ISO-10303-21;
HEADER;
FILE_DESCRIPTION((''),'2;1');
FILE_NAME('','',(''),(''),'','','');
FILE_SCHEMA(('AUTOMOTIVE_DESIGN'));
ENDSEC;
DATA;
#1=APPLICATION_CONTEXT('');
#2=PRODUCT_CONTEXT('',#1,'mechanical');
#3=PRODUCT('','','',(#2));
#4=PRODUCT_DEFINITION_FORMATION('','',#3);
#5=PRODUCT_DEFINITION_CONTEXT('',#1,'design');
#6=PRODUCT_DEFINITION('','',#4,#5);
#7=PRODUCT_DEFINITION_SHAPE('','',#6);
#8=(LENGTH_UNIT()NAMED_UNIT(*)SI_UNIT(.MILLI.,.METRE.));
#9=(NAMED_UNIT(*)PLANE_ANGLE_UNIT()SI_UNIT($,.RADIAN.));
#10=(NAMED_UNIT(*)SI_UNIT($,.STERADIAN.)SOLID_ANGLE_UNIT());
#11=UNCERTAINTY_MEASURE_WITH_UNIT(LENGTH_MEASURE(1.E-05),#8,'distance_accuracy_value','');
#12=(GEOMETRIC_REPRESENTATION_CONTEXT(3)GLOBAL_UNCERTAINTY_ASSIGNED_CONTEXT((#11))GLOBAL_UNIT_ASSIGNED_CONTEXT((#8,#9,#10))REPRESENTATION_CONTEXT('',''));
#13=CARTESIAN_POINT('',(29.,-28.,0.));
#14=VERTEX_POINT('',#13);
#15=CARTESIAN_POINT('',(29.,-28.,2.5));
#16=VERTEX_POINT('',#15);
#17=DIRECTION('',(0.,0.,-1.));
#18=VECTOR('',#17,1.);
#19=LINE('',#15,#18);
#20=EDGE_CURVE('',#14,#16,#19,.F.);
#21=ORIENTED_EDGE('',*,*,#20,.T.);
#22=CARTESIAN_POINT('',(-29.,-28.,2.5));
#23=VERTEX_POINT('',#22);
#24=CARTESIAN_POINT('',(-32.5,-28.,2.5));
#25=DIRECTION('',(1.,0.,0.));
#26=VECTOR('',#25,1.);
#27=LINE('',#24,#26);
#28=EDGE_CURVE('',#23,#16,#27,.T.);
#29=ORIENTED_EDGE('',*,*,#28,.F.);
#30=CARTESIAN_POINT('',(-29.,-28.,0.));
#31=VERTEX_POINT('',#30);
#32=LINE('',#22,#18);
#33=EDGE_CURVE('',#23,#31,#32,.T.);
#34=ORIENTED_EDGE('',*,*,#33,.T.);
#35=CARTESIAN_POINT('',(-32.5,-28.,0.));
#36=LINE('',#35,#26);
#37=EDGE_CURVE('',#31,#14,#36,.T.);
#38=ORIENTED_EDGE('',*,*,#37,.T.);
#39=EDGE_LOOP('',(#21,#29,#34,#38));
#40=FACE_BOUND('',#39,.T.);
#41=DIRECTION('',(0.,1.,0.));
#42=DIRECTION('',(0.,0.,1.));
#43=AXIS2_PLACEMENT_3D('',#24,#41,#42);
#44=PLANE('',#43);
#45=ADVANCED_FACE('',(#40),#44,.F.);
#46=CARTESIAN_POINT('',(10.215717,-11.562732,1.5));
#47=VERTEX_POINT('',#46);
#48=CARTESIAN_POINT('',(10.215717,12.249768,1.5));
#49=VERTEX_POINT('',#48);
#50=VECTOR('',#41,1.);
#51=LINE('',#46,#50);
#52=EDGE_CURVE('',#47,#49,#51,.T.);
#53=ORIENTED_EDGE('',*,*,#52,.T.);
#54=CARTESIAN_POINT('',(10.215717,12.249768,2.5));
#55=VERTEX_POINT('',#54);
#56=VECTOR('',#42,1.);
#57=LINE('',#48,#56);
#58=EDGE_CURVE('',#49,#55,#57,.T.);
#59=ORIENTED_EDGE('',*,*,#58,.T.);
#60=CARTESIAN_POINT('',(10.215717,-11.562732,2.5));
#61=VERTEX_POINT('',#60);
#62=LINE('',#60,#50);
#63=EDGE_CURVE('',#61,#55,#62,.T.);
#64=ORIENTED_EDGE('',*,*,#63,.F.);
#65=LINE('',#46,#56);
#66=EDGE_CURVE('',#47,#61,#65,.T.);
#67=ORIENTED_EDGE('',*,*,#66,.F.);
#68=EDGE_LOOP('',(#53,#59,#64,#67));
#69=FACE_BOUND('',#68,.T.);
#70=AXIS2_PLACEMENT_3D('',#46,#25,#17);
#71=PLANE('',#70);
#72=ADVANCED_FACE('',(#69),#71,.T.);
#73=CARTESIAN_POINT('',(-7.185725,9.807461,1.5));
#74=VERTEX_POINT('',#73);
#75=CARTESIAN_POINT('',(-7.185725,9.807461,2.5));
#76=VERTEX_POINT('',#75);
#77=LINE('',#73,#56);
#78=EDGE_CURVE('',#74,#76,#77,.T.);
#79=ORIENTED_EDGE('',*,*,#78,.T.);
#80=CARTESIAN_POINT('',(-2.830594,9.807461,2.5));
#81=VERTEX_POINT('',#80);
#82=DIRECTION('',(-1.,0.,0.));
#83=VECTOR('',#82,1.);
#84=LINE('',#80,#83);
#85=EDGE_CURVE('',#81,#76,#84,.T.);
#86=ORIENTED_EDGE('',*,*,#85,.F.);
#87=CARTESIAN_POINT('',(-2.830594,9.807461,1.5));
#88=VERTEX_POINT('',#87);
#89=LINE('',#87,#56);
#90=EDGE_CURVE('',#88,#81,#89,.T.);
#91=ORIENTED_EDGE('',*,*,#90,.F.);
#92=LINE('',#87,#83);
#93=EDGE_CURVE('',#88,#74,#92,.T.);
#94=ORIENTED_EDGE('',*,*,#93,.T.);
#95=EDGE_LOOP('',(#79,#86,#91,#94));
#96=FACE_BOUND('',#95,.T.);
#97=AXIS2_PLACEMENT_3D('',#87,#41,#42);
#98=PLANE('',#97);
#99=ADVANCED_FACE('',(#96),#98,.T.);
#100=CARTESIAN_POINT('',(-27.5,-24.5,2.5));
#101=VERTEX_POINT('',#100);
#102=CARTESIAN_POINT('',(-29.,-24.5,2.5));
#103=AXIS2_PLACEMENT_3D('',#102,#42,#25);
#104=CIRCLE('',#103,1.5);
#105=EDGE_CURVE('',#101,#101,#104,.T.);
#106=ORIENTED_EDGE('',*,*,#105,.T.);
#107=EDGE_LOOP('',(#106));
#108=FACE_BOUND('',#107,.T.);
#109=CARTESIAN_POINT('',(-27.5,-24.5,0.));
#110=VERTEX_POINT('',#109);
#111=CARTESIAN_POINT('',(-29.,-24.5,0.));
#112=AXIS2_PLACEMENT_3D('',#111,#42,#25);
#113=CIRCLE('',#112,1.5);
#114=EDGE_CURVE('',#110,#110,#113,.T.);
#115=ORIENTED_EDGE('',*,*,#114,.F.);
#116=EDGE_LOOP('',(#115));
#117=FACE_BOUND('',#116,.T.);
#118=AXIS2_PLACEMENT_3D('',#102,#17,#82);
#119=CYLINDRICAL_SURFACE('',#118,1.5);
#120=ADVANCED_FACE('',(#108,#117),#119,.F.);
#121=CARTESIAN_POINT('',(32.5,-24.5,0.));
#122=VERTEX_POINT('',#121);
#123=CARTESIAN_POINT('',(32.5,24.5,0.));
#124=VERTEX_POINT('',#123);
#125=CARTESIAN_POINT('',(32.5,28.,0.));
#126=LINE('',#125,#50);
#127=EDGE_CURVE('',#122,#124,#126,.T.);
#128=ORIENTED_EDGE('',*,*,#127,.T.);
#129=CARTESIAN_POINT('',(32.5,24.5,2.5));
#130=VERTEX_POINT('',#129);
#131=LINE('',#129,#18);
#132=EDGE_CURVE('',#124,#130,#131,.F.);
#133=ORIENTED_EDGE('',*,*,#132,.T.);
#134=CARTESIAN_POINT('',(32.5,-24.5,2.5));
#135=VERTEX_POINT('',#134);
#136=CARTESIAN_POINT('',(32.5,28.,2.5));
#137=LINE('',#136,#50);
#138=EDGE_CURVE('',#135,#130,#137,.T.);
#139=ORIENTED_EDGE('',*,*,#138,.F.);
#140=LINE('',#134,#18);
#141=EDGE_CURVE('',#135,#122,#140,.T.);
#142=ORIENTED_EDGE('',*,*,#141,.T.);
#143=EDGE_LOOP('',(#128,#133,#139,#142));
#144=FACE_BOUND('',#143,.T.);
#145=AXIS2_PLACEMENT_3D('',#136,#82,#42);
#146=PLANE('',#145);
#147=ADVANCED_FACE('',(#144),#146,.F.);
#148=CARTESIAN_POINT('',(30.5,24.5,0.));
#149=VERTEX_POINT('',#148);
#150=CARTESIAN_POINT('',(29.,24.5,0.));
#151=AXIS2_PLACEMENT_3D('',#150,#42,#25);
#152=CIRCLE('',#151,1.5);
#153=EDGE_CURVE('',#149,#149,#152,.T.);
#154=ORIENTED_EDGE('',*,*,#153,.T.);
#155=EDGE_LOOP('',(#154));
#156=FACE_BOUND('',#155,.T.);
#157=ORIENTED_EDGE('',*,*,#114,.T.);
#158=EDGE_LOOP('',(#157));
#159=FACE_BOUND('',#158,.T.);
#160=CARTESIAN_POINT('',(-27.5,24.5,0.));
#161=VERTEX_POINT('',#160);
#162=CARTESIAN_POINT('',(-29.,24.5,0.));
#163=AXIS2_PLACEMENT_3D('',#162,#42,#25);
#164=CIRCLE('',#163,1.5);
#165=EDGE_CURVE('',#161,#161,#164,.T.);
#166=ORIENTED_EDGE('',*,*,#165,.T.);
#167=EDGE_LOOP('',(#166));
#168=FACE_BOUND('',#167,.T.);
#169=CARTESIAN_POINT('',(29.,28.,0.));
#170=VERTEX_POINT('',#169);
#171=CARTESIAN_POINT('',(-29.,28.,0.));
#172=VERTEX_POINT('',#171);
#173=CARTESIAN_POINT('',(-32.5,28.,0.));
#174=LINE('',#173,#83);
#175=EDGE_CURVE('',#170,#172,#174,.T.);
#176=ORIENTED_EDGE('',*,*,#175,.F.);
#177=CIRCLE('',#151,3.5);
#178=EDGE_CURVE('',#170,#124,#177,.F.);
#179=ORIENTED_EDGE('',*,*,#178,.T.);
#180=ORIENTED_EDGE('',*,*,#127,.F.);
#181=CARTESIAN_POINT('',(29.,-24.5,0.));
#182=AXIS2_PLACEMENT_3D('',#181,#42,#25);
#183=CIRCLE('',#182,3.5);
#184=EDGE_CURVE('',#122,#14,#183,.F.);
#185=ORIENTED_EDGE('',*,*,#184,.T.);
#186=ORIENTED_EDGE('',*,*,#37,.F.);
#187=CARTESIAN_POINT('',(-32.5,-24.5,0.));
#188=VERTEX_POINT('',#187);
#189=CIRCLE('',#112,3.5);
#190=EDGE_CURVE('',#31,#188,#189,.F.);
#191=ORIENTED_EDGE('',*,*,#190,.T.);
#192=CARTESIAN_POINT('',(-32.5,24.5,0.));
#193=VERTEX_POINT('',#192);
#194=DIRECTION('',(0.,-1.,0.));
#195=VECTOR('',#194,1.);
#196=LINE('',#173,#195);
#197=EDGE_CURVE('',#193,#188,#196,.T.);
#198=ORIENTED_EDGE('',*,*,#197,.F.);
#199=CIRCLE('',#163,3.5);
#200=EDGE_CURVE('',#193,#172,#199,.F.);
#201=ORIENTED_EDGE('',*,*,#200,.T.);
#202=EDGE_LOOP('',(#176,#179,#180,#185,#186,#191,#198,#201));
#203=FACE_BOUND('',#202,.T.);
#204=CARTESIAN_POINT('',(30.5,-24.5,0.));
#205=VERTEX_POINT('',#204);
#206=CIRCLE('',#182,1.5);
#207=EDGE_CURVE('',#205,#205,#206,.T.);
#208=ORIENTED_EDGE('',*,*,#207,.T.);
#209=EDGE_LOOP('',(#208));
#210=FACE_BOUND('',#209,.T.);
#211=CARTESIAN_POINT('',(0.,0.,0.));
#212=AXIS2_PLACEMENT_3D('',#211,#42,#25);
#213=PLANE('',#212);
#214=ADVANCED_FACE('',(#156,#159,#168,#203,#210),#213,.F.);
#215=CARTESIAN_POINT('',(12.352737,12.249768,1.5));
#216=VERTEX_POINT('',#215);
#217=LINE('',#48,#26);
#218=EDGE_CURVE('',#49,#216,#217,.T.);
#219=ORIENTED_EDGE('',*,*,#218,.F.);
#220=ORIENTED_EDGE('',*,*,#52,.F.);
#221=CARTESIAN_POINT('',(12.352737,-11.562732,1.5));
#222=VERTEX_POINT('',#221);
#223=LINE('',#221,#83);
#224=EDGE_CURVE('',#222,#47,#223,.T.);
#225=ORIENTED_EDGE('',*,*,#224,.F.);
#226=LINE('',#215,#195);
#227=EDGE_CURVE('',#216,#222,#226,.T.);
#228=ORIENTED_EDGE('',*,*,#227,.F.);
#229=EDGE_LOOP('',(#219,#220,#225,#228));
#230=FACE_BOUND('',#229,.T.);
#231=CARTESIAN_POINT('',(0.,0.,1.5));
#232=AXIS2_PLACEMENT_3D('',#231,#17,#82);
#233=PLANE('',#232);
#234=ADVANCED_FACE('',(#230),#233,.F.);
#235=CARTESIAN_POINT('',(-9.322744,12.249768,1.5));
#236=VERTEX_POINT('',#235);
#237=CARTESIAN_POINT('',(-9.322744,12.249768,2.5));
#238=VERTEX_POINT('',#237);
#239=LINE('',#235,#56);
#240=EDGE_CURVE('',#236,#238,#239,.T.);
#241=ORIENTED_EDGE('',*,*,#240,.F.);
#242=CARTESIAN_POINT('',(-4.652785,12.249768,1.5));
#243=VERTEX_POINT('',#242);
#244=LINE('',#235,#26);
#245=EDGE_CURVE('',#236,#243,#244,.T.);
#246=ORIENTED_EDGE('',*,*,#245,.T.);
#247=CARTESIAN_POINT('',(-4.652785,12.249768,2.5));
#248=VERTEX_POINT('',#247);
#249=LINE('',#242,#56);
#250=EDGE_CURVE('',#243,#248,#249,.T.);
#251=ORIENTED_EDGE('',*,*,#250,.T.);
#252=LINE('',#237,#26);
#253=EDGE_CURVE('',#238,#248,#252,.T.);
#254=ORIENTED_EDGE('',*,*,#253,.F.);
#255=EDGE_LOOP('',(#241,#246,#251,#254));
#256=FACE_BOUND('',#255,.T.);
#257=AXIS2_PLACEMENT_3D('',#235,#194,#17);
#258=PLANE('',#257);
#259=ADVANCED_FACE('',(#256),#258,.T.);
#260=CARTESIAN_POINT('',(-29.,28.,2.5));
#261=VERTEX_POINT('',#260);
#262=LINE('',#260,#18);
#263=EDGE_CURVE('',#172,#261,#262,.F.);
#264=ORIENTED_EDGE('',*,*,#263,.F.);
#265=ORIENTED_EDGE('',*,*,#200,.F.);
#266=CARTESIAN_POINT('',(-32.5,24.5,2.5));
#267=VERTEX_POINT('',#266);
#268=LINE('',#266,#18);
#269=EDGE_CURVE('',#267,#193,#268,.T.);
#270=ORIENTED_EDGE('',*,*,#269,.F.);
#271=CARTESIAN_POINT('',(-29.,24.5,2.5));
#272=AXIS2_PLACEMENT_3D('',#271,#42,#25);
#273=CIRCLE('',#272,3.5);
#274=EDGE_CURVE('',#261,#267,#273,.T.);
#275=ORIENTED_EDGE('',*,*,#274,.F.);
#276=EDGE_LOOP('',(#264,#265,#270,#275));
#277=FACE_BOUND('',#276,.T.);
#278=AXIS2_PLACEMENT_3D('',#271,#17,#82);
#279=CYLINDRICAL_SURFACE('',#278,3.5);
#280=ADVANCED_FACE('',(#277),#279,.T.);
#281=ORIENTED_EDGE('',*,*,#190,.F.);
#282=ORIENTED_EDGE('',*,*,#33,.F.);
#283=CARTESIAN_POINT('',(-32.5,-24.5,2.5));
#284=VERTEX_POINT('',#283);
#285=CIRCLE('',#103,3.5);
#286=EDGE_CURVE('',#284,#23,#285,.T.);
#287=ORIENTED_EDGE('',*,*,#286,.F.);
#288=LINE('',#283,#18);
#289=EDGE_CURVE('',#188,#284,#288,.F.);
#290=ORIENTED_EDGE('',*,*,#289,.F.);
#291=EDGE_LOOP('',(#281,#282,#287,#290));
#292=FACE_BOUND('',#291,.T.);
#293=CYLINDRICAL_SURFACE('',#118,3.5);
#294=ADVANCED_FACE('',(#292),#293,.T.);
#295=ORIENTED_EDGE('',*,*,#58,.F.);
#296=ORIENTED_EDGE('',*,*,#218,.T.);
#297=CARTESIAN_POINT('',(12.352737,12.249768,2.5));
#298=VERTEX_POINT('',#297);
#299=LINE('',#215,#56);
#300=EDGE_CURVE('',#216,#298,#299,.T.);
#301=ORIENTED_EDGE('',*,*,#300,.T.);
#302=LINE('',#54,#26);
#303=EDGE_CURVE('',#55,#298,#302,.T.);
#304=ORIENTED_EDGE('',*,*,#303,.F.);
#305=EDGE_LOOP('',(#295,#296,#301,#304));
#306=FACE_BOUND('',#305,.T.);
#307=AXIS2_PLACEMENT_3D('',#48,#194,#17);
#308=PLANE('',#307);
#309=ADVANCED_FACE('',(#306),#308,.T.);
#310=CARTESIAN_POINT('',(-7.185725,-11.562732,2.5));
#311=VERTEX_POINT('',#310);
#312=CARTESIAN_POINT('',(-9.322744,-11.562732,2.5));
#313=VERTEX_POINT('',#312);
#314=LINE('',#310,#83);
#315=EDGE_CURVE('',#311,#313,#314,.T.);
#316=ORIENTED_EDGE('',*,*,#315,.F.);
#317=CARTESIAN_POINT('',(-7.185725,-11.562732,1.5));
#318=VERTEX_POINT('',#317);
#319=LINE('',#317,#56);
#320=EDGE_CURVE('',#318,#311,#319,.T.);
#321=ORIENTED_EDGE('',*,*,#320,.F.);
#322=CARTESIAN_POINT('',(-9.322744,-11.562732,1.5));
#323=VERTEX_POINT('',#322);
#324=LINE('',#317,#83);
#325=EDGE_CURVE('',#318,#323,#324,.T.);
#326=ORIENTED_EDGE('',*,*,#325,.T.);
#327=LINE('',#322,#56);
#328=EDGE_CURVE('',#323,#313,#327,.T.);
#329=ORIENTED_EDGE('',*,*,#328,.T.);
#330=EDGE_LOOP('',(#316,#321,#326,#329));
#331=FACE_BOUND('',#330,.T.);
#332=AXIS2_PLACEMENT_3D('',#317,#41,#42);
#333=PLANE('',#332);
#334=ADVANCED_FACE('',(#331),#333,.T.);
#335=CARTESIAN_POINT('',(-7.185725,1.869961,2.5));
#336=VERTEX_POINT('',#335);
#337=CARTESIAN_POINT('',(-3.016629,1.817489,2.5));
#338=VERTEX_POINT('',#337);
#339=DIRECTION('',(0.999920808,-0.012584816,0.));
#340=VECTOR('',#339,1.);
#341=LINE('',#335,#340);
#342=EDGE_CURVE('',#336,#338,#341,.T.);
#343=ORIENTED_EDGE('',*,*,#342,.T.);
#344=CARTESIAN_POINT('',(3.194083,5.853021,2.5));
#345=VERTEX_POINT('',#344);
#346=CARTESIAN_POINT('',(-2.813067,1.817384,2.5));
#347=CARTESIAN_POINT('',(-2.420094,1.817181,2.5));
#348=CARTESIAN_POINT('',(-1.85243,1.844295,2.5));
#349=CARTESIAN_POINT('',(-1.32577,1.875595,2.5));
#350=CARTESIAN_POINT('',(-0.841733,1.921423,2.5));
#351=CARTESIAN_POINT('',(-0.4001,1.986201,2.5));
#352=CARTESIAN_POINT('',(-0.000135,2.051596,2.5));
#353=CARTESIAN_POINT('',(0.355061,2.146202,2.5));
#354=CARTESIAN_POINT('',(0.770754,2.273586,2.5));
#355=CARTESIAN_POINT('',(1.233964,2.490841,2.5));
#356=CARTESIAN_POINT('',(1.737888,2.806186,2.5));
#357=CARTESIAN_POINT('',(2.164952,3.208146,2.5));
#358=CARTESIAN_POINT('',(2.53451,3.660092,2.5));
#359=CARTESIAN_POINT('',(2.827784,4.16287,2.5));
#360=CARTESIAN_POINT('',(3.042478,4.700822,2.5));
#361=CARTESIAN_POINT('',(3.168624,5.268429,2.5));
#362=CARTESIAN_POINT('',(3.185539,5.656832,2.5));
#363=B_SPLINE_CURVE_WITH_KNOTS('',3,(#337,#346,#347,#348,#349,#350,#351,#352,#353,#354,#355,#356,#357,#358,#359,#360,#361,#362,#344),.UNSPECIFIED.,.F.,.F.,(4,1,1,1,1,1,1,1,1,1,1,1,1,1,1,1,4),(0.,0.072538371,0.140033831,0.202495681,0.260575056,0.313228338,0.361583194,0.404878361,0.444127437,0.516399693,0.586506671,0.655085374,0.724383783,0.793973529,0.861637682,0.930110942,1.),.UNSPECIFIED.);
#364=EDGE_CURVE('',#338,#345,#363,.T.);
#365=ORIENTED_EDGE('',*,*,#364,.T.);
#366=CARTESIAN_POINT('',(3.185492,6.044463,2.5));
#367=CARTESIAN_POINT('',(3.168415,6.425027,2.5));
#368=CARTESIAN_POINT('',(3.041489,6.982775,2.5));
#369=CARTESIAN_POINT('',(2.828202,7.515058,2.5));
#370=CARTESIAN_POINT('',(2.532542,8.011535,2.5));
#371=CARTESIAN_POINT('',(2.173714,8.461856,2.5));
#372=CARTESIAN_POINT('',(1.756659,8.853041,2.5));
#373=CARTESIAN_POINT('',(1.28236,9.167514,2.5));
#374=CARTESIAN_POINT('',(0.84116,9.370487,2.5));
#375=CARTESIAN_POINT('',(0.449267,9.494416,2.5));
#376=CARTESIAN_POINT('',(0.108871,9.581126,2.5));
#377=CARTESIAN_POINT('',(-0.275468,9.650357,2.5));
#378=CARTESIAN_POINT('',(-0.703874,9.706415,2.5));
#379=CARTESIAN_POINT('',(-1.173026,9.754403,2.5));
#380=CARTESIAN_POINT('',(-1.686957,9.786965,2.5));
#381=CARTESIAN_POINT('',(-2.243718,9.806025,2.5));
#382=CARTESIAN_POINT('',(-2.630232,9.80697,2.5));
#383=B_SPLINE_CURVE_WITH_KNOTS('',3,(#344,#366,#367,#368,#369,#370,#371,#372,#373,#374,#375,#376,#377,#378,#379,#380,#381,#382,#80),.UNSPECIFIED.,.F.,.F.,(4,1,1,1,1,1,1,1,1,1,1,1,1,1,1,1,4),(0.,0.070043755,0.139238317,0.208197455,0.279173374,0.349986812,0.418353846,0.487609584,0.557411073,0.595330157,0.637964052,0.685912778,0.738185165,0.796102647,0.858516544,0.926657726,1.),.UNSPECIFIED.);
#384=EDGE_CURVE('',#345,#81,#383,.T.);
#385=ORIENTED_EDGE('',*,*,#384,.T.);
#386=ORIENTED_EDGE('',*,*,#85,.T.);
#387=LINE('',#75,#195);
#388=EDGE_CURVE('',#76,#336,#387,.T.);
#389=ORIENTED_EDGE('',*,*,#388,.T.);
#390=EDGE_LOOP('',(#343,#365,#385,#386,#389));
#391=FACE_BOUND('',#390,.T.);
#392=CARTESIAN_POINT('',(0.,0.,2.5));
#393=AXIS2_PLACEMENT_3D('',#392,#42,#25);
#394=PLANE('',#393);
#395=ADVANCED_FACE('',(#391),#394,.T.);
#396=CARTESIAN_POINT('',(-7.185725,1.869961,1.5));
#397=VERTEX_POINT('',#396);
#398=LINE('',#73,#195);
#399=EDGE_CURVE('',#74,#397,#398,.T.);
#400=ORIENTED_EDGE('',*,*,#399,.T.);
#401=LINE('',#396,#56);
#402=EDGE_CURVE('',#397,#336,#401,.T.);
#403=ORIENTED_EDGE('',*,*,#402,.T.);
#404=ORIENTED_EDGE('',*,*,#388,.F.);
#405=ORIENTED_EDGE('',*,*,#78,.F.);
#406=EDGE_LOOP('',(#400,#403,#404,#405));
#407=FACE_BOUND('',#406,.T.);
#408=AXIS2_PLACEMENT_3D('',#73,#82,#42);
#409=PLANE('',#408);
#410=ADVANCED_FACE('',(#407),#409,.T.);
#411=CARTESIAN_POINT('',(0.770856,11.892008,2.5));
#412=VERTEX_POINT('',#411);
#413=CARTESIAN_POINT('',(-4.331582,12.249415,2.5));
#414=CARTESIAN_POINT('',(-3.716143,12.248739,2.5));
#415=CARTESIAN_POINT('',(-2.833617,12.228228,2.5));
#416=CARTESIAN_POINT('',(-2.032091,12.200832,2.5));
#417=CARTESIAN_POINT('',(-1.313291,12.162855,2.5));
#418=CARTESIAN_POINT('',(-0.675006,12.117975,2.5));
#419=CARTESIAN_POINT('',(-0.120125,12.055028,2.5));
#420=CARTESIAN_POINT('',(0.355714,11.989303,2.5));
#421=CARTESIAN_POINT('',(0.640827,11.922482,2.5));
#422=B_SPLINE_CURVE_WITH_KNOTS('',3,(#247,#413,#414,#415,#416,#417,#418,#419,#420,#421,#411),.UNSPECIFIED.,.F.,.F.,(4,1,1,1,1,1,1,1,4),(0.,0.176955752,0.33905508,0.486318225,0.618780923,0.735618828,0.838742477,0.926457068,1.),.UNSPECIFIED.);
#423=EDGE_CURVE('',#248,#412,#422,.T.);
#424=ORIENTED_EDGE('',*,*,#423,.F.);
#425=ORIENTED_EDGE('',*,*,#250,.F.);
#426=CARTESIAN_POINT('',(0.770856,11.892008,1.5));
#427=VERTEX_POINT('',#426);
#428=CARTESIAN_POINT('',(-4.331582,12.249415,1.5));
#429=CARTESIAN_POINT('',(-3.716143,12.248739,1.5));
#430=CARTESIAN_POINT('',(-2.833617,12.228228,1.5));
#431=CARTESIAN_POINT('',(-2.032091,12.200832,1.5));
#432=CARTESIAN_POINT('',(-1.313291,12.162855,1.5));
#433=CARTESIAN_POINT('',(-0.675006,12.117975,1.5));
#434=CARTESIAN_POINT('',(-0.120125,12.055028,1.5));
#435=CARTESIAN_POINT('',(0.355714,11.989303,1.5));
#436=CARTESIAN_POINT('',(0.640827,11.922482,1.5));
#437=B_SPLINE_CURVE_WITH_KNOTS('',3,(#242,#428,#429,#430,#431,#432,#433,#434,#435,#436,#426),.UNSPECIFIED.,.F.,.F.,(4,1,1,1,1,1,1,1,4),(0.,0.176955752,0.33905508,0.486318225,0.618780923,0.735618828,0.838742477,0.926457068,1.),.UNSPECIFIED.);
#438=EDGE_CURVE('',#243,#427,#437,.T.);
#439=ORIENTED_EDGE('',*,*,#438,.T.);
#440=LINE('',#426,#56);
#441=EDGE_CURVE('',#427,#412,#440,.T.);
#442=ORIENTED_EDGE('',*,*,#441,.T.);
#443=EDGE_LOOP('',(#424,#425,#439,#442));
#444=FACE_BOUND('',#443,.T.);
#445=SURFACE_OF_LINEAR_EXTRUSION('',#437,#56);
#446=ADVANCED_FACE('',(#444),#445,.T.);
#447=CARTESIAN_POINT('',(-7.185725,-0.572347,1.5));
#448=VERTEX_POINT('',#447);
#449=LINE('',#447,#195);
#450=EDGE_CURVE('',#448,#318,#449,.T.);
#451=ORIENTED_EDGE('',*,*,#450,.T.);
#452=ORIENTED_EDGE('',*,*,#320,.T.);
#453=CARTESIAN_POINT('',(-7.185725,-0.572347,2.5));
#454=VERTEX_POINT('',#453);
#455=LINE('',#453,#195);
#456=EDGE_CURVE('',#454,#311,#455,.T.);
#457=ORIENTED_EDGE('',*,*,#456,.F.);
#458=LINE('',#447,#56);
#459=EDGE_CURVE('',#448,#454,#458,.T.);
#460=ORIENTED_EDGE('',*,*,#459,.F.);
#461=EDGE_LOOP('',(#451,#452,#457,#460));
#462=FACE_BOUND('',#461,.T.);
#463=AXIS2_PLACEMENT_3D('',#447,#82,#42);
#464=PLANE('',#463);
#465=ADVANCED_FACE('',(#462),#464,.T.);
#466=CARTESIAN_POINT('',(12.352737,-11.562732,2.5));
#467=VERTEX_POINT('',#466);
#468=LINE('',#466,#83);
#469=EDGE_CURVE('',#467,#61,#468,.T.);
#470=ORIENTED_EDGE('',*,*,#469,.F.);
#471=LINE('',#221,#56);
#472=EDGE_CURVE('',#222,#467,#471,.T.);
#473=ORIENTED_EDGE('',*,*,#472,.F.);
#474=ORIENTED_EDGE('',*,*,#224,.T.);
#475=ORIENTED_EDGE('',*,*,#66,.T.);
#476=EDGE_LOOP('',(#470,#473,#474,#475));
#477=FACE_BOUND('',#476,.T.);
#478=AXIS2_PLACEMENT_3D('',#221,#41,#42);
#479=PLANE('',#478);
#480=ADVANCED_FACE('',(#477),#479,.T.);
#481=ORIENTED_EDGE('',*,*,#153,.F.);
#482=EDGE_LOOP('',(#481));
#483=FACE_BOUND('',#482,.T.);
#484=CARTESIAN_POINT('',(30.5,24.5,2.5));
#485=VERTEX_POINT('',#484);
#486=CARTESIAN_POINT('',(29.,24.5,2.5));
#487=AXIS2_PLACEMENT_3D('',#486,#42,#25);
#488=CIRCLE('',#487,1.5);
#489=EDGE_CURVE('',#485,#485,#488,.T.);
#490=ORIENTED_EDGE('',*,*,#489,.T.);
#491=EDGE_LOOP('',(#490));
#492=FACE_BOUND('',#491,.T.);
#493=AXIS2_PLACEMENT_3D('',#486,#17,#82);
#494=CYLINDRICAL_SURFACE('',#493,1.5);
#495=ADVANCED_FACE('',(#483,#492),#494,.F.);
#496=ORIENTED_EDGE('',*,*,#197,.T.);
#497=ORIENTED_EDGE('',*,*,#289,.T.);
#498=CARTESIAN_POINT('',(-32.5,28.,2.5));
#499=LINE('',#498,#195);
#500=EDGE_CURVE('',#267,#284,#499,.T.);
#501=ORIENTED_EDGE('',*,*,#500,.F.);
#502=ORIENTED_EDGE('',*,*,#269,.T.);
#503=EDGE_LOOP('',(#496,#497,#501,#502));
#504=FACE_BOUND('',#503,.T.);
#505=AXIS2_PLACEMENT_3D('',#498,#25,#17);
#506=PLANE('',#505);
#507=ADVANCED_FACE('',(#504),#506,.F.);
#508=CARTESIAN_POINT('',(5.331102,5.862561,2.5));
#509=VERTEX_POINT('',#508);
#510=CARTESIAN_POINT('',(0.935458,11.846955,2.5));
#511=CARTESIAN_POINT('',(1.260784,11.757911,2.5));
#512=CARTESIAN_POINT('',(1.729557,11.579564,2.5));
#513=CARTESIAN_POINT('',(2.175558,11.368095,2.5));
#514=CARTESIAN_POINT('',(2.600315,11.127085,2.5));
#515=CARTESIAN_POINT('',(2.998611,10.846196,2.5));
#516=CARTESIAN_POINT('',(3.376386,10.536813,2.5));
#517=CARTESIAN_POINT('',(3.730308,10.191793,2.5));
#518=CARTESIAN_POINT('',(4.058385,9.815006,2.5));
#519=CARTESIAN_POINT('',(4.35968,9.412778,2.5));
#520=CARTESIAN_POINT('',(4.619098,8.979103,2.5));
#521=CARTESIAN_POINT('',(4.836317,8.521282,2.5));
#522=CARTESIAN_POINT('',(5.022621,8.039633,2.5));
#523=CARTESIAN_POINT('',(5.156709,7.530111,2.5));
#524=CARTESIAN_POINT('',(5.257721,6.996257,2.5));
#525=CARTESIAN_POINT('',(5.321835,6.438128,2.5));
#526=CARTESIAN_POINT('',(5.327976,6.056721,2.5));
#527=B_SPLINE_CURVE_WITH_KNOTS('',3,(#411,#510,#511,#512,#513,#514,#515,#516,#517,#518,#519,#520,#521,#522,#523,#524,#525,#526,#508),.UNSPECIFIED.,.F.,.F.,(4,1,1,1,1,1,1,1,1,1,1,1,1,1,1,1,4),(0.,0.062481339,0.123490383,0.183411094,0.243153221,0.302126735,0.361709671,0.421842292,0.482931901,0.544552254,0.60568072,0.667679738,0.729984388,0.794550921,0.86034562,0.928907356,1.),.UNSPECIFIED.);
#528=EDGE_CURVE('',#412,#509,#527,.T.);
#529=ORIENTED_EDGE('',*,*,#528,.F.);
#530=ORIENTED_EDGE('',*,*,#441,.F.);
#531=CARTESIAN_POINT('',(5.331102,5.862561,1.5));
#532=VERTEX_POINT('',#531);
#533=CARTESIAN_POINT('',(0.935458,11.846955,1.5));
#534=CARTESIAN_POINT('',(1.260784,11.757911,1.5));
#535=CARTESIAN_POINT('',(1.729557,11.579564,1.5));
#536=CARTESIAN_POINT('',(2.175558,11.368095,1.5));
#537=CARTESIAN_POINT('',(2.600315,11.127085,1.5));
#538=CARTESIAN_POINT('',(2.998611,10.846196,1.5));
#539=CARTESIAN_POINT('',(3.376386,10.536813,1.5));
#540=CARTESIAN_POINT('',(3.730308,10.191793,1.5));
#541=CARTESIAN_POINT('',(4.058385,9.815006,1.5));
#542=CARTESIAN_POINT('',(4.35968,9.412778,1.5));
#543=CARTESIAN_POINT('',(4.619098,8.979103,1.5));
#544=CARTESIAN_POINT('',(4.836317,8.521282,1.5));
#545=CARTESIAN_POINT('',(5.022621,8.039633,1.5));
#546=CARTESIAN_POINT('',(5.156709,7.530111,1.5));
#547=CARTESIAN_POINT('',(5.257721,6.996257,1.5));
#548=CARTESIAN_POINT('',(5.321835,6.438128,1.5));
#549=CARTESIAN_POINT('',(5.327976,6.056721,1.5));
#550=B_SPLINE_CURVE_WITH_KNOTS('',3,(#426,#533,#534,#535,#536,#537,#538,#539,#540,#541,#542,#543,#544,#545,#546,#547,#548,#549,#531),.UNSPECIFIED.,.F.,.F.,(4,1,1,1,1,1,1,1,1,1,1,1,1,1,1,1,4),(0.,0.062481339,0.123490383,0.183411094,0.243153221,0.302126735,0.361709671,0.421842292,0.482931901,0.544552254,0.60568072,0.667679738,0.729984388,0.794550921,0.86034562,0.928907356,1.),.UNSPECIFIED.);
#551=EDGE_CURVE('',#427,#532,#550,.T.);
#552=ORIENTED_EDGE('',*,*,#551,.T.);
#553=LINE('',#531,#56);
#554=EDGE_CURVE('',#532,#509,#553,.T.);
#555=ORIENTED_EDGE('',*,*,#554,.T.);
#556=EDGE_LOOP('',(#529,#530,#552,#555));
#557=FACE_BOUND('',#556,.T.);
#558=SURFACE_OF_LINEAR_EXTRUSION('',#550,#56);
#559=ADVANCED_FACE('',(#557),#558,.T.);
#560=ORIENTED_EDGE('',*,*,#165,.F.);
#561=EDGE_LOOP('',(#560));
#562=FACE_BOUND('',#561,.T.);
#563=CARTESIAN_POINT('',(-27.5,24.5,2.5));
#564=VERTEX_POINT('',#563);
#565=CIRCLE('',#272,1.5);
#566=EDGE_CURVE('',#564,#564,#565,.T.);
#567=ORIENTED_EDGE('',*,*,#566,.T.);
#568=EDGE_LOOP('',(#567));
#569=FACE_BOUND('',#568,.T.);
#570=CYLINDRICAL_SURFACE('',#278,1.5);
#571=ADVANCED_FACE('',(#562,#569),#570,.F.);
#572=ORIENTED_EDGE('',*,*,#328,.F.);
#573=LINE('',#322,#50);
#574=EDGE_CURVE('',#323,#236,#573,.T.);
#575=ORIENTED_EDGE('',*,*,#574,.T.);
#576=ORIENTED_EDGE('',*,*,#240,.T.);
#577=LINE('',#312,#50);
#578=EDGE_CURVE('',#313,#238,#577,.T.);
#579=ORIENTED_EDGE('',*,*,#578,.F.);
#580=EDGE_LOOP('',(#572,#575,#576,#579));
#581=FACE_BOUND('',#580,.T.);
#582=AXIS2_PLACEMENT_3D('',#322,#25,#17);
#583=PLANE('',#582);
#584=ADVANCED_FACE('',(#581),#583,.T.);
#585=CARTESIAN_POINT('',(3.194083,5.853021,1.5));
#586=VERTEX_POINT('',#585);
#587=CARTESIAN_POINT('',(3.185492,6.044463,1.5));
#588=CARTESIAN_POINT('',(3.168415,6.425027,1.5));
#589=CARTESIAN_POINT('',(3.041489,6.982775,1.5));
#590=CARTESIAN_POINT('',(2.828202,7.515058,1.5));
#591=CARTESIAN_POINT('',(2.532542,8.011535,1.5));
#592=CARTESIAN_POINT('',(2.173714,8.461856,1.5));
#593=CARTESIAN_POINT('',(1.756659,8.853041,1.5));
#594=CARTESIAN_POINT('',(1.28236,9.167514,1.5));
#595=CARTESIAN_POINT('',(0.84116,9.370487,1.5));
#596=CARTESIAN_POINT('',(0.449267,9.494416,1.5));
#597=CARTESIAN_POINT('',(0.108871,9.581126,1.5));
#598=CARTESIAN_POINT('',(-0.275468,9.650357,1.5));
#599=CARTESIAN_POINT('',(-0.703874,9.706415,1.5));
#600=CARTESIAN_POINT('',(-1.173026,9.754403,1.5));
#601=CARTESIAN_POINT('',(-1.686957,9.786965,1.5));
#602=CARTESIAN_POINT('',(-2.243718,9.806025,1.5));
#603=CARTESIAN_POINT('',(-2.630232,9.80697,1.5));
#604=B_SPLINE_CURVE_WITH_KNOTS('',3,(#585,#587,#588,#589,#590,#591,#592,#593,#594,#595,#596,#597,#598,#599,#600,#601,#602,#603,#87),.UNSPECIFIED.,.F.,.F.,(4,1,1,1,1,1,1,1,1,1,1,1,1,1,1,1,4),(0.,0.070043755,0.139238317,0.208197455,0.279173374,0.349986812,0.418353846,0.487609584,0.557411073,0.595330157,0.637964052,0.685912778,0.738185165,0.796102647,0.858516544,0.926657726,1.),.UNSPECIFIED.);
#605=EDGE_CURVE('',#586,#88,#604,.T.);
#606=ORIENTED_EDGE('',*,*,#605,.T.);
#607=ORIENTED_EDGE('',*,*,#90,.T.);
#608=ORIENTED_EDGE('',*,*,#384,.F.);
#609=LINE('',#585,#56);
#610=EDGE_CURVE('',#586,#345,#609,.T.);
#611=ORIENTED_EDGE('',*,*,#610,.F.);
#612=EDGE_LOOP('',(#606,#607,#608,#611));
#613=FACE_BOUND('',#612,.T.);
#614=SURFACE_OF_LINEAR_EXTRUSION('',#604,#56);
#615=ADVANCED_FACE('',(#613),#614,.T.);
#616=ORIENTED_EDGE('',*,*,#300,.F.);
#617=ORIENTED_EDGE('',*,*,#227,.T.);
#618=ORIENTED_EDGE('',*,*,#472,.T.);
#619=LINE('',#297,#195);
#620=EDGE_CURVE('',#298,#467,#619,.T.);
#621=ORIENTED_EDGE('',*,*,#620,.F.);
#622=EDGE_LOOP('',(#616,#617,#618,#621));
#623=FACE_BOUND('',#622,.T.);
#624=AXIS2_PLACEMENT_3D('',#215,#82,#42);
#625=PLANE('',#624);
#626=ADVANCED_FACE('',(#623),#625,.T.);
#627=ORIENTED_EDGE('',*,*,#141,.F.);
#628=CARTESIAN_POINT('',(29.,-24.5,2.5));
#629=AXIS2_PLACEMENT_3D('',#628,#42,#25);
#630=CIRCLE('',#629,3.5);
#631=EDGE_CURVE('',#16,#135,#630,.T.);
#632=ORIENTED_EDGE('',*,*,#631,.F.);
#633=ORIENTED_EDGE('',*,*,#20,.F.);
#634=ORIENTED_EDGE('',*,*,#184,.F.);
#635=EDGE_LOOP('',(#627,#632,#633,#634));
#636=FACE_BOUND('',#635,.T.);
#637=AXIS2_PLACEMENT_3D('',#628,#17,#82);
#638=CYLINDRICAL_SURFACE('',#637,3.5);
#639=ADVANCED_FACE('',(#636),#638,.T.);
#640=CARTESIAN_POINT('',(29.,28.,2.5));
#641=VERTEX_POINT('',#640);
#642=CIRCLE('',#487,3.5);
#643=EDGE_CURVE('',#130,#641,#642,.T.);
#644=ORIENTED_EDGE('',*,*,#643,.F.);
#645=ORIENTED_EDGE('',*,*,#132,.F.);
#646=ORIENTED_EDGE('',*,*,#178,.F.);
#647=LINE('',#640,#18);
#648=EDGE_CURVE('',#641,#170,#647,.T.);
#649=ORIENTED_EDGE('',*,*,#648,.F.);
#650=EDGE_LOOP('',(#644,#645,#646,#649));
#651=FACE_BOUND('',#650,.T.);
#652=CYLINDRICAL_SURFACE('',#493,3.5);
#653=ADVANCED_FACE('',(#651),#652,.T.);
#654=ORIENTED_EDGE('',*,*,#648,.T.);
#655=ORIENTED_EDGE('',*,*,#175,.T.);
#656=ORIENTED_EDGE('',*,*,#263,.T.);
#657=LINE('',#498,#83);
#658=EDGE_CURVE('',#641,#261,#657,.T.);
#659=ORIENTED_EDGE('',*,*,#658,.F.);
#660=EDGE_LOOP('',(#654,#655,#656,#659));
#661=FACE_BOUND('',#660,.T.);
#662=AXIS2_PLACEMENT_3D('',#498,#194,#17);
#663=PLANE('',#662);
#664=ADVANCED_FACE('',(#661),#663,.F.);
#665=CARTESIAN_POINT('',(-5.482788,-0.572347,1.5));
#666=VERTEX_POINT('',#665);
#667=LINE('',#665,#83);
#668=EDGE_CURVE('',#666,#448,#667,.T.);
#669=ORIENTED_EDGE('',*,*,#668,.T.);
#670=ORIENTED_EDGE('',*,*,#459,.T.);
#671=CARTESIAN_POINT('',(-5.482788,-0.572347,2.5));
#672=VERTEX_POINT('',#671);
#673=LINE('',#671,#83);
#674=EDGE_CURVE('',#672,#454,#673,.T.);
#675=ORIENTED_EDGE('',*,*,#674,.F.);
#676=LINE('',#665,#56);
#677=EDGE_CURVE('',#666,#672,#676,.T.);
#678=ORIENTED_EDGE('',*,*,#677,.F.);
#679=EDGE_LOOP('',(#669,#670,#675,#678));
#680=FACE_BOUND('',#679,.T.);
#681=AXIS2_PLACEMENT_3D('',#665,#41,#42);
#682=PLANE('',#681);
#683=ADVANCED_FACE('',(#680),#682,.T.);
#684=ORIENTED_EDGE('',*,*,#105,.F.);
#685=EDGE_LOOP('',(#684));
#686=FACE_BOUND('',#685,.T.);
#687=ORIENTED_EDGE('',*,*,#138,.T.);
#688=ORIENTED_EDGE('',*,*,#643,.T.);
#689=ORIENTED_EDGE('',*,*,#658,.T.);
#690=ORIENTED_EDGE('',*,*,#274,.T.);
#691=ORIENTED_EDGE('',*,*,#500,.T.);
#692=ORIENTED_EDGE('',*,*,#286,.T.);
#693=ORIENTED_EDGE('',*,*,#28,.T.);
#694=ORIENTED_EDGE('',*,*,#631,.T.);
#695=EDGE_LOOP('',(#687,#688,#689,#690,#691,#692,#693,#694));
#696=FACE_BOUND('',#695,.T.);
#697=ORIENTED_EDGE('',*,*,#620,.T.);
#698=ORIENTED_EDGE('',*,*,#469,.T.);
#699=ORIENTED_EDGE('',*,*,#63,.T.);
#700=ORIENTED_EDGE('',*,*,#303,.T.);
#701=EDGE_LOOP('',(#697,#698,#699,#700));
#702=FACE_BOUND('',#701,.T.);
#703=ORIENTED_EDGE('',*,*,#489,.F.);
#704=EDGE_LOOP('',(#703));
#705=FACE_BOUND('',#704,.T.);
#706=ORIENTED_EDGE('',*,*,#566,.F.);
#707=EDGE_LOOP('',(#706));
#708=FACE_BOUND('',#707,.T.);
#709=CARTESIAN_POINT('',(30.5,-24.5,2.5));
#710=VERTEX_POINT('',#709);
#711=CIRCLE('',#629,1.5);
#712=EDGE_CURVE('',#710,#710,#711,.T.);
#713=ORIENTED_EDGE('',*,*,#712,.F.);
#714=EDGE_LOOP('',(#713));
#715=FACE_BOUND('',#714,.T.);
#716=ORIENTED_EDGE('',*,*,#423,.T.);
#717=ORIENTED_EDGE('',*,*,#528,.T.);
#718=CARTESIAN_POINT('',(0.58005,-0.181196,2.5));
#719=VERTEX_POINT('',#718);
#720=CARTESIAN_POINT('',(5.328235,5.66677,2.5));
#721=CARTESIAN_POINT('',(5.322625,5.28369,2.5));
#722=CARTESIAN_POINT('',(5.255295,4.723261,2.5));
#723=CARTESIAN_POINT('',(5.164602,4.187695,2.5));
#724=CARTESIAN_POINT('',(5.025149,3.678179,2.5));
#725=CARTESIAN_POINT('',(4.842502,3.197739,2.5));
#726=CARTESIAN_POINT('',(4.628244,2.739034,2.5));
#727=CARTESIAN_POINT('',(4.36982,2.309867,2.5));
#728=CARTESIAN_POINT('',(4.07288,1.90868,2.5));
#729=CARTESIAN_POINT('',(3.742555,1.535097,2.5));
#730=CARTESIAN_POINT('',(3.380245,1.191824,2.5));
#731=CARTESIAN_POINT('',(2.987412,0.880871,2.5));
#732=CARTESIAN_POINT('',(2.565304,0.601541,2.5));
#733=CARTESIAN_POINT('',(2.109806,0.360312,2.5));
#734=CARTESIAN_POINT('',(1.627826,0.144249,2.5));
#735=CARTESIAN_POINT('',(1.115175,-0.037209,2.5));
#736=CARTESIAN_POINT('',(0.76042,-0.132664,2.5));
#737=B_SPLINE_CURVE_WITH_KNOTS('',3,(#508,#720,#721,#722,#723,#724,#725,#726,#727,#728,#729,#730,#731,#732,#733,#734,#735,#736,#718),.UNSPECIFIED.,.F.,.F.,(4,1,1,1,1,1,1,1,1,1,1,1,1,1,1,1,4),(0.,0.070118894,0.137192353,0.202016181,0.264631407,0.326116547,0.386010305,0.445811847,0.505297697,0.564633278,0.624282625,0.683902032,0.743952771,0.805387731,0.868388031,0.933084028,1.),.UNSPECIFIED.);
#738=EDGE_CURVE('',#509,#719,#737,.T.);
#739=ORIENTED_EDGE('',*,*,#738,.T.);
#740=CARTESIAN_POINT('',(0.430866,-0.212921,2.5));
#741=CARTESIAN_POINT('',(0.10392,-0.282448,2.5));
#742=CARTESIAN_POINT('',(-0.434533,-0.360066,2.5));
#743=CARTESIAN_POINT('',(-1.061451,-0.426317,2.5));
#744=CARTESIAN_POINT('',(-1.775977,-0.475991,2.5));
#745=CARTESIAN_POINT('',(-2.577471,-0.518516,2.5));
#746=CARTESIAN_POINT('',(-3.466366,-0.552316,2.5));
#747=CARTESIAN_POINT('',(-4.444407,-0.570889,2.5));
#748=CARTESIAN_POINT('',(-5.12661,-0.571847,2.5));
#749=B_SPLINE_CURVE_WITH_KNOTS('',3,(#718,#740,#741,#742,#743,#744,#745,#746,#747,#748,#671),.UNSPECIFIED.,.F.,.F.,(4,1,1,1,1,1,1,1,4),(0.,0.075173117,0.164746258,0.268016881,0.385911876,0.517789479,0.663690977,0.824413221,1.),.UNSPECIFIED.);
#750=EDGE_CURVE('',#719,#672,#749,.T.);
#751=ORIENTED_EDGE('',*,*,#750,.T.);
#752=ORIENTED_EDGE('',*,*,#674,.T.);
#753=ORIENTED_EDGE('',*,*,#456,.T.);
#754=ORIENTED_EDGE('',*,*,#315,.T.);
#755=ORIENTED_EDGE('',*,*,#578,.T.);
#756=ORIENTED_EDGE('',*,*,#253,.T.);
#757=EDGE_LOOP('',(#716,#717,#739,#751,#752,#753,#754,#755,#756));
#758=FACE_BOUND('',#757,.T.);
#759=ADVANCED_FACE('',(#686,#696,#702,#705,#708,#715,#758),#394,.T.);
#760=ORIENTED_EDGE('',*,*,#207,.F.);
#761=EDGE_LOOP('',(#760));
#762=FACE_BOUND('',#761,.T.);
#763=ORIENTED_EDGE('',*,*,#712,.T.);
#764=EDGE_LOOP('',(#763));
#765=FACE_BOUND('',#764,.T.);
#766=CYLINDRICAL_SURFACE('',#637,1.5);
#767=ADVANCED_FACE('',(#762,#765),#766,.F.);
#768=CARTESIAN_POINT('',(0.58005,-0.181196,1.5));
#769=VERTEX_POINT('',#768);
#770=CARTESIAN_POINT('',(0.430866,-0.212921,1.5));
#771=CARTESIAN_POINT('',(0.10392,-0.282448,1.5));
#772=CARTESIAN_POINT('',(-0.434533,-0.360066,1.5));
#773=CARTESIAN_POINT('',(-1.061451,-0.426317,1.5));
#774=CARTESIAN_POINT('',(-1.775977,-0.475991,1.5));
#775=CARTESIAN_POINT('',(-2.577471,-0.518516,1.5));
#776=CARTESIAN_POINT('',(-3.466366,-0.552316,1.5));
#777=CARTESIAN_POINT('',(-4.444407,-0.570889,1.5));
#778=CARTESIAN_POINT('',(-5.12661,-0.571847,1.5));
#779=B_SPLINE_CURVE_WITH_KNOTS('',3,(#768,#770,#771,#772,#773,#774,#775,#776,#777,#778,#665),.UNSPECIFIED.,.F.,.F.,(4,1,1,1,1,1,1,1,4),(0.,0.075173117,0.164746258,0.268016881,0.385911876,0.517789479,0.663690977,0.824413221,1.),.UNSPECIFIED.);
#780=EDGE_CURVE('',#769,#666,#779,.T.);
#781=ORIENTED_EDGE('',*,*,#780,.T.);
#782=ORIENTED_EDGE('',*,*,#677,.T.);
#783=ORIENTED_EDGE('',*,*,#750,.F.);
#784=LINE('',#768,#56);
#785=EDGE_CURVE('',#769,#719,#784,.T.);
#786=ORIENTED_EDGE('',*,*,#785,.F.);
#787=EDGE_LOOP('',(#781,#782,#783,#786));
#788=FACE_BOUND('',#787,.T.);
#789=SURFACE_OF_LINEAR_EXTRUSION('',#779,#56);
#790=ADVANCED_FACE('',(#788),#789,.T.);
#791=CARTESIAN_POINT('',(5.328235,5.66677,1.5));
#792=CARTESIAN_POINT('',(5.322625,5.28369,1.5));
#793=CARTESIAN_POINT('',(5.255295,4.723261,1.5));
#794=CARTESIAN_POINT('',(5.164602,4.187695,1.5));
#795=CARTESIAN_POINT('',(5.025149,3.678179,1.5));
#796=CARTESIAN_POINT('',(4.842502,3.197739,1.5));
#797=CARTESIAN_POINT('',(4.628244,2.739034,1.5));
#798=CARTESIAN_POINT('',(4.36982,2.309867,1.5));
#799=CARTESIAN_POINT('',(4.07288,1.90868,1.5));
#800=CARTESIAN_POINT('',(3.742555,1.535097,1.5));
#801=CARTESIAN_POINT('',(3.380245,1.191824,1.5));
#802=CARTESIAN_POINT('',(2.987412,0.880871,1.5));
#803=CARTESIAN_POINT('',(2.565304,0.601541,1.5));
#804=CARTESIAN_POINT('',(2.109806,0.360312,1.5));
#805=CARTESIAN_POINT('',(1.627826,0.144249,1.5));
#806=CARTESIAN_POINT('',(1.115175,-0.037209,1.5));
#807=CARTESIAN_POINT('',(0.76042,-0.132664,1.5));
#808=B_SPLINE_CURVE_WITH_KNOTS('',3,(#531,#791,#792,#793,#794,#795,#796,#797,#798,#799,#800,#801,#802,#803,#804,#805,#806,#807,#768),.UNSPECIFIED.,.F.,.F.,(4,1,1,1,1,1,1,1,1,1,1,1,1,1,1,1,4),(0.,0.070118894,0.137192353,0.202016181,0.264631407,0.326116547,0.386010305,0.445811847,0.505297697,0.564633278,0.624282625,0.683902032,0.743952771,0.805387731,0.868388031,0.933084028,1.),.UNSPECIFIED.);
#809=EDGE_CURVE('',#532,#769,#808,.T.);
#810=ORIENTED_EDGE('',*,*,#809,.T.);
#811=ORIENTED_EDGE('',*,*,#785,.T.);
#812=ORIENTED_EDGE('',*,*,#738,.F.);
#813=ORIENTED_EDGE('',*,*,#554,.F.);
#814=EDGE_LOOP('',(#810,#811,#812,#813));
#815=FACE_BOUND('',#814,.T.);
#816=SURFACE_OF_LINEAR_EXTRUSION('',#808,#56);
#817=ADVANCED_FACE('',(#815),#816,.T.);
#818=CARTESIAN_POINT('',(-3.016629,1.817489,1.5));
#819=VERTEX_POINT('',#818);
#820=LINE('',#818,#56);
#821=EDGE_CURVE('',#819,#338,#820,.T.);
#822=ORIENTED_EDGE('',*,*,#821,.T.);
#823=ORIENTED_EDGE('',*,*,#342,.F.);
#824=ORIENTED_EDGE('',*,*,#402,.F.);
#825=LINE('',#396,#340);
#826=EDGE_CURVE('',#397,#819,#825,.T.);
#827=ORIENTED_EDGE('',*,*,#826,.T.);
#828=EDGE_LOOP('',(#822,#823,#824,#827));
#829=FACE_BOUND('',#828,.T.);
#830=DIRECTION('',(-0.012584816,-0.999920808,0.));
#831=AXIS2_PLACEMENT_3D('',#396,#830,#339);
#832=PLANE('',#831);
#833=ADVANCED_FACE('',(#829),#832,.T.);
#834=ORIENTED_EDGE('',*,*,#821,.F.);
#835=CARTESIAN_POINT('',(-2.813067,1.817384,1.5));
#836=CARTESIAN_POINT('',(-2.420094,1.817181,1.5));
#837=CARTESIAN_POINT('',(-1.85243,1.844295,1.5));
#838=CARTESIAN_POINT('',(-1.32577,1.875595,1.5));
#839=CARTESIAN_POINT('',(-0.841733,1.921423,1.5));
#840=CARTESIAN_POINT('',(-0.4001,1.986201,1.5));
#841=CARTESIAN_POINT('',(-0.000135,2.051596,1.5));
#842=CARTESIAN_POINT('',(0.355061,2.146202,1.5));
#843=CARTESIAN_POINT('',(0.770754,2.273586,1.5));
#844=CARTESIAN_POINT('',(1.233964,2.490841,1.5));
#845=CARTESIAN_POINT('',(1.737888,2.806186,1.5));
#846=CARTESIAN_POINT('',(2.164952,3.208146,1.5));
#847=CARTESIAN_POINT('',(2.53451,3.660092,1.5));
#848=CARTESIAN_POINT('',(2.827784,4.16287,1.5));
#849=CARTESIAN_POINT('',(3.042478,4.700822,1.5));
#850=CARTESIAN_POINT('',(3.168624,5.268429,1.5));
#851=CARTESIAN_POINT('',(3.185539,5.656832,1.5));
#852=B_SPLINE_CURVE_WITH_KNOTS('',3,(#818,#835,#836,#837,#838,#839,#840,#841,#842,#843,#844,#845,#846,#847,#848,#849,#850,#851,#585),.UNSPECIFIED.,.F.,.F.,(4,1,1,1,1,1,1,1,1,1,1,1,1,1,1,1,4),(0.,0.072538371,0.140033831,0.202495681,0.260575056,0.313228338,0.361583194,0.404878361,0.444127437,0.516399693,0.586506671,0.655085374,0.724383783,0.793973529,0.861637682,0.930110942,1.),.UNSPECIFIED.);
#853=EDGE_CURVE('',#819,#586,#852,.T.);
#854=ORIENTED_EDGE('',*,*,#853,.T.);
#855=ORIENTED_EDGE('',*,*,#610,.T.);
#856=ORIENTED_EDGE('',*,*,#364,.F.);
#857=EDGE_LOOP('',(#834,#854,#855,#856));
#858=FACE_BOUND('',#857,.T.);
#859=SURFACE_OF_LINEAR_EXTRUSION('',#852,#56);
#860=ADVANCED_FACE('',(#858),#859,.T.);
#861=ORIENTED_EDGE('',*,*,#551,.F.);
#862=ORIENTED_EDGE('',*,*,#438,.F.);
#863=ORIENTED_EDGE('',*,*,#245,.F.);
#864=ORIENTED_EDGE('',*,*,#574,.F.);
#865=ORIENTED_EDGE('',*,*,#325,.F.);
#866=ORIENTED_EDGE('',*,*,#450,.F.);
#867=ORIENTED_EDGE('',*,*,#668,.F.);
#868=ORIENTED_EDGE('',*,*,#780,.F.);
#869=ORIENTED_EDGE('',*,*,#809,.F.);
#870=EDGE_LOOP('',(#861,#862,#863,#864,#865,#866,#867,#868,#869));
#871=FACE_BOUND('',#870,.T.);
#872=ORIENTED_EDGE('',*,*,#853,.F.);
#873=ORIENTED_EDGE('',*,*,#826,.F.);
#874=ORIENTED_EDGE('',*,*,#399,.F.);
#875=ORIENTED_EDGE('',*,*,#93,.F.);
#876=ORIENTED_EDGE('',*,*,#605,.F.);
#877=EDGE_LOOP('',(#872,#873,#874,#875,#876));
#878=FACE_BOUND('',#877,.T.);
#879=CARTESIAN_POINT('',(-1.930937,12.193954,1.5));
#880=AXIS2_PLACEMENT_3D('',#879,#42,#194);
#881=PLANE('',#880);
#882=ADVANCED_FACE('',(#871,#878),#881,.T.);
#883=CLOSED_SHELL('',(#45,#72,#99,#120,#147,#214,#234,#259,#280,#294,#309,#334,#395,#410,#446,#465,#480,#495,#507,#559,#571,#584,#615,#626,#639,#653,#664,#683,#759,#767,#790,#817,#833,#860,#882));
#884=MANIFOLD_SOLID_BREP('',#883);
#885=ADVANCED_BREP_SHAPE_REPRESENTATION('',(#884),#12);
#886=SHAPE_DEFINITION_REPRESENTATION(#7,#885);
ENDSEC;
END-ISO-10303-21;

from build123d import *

# Parameters (mm, degrees)
BOSS_EXTRU_1_OUTLINE_W  = 65
BOSS_EXTRU_1_OUTLINE_H  = 56
BOSS_EXTRU_1_OUTLINE_R  = 1.5
BOSS_EXTRU_1_DEPTH      = 2.5
CONG_3_R                = 3.5
ESQUISSE2_W             = 2.137019231
ESQUISSE2_H             = 23.8125
ENL_V_MAT_EXTRU_1_DEPTH = 1


# Read off the part's stored shape, not the designer's step: Boss.-Extru.1
with BuildPart() as part:
    # Boss.-Extru.1 outline → Boss.-Extru.1 (new body)
    with BuildSketch(Plane.XY):
        Rectangle(BOSS_EXTRU_1_OUTLINE_W, BOSS_EXTRU_1_OUTLINE_H)
        with Locations((-29, -24.5)):
            Circle(BOSS_EXTRU_1_OUTLINE_R, mode=Mode.SUBTRACT)
        with Locations((29, -24.5)):
            Circle(BOSS_EXTRU_1_OUTLINE_R, mode=Mode.SUBTRACT)
        with Locations((-29, 24.5)):
            Circle(BOSS_EXTRU_1_OUTLINE_R, mode=Mode.SUBTRACT)
        with Locations((29, 24.5)):
            Circle(BOSS_EXTRU_1_OUTLINE_R, mode=Mode.SUBTRACT)
    extrude(amount=BOSS_EXTRU_1_DEPTH)

    # Congé3
    cong_3_edges = [part.edges().sort_by_distance(p)[0] for p in [
        (-32.5, 28, 1.25),
        (32.5, 28, 1.25),
        (32.5, -28, 1.25),
        (-32.5, -28, 1.25),
    ]]
    fillet(cong_3_edges, radius=CONG_3_R)

    # Esquisse2 → Enlèv. mat.-Extru.1 (cut)
    # profile 1 of 2: a face of its own
    with BuildSketch(Plane.XY.offset(2.5)):
        with BuildLine():
            Line((-9.322744099, 12.249768252), (-4.652784664, 12.249768252))
            add(Edge.make_bspline(
                [(-4.652784664, 12.249768252), (-4.331581892, 12.249415172), (-3.716143116, 12.248738655), (-2.833617469, 12.228227617), (-2.032090545, 12.20083173), (-1.313290632, 12.16285492), (-0.675006107, 12.117974548), (-0.120125194, 12.055027637), (0.355713573, 11.989303126), (0.640827095, 11.922482485), (0.77085566, 11.892008336)],
                knots=[0, 0, 0, 0, 1.415646017, 2.712440637, 3.8905458, 4.950247383, 5.884950622, 6.709939814, 7.411656543, 8, 8, 8, 8], degree=3))
            add(Edge.make_bspline(
                [(0.77085566, 11.892008336), (0.935458095, 11.846955427), (1.260784315, 11.757911225), (1.729557484, 11.579564285), (2.175557754, 11.368094554), (2.600315321, 11.127085249), (2.998610565, 10.846195964), (3.376385951, 10.536812958), (3.730307602, 10.191793179), (4.058385286, 9.815006359), (4.35968007, 9.412777789), (4.61909809, 8.979102974), (4.83631726, 8.521281785), (5.022621303, 8.039632667), (5.156709181, 7.530111002), (5.257721123, 6.996257119), (5.321835447, 6.438128245), (5.32797609, 6.056720932), (5.331102055, 5.86256122)],
                knots=[0, 0, 0, 0, 0.999701418, 1.975846123, 2.934577507, 3.890451536, 4.834027766, 5.787354733, 6.749476667, 7.726910423, 8.712836071, 9.690891519, 10.682875813, 11.679750201, 12.712814741, 13.765529915, 14.8625177, 16, 16, 16, 16], degree=3))
            add(Edge.make_bspline(
                [(5.331102055, 5.86256122), (5.328234861, 5.66676956), (5.322625004, 5.283689954), (5.25529492, 4.723260806), (5.164602009, 4.187694616), (5.025148849, 3.67817889), (4.842502395, 3.197739452), (4.628243964, 2.739034284), (4.369820302, 2.309867231), (4.072879586, 1.908680234), (3.742555345, 1.535096724), (3.380245177, 1.191823926), (2.987411776, 0.880871195), (2.56530359, 0.601541428), (2.109805511, 0.360312098), (1.627825859, 0.144249005), (1.11517528, -0.037209461), (0.760419961, -0.132663986), (0.580050372, -0.181196292)],
                knots=[0, 0, 0, 0, 1.121902311, 2.195077645, 3.232258892, 4.234102512, 5.217864754, 6.176164875, 7.132989551, 8.084763148, 9.034132444, 9.988522005, 10.94243251, 11.903244335, 12.886203696, 13.894208494, 14.929344452, 16, 16, 16, 16], degree=3))
            add(Edge.make_bspline(
                [(0.580050372, -0.181196292), (0.430866189, -0.212921216), (0.103920378, -0.282448234), (-0.434532786, -0.360066485), (-1.061450501, -0.426316947), (-1.775977084, -0.475990758), (-2.577471169, -0.518515586), (-3.466366331, -0.552316368), (-4.444407463, -0.570889123), (-5.126610034, -0.571847017), (-5.482787669, -0.572347133)],
                knots=[0, 0, 0, 0, 0.601384939, 1.31797006, 2.144135048, 3.087295005, 4.142315834, 5.309527816, 6.595305764, 8, 8, 8, 8], degree=3))
            Line((-5.482787669, -0.572347133), (-7.185724869, -0.572347133))
            Line((-7.185724869, -0.572347133), (-7.185724869, -11.562731748))
            Line((-7.185724869, -11.562731748), (-9.322744099, -11.562731748))
            Line((-9.322744099, -11.562731748), (-9.322744099, 12.249768252))
        make_face()
        with BuildLine():
            Line((-7.185724869, 9.807460559), (-7.185724869, 1.869960559))
            Line((-7.185724869, 1.869960559), (-3.016629316, 1.817489105))
            add(Edge.make_bspline(
                [(-3.016629316, 1.817489105), (-2.813066963, 1.817383897), (-2.420094039, 1.817180796), (-1.852429734, 1.844294549), (-1.325770119, 1.875594601), (-0.841732919, 1.921422938), (-0.400099936, 1.986201493), (-0.000134784, 2.051595639), (0.355061194, 2.146201766), (0.770753978, 2.273585505), (1.233963895, 2.490841336), (1.737887752, 2.806186124), (2.16495192, 3.208145942), (2.534510332, 3.660092437), (2.827784252, 4.162870443), (3.042477699, 4.700821602), (3.168623788, 5.268428935), (3.185538784, 5.656832166), (3.194082824, 5.853020956)],
                knots=[0, 0, 0, 0, 1.160613943, 2.240541288, 3.23993089, 4.169200891, 5.011653406, 5.7853311, 6.478053781, 7.106038997, 8.262395093, 9.384106736, 10.481365981, 11.59014053, 12.70357646, 13.786202915, 14.881775077, 16, 16, 16, 16], degree=3))
            add(Edge.make_bspline(
                [(3.194082824, 5.853020956), (3.185492318, 6.044463342), (3.168415456, 6.425027112), (3.041488959, 6.982775465), (2.828201662, 7.515057668), (2.532541618, 8.011535267), (2.173713573, 8.461855522), (1.756659113, 8.853041333), (1.28235996, 9.167513989), (0.841160389, 9.370486852), (0.449266605, 9.49441578), (0.108870592, 9.581126212), (-0.275467747, 9.650356676), (-0.703873532, 9.706414722), (-1.173026277, 9.754403449), (-1.686956598, 9.786965187), (-2.243717635, 9.806025094), (-2.630232412, 9.806970487), (-2.830594159, 9.807460559)],
                knots=[0, 0, 0, 0, 1.120700087, 2.227813068, 3.331159281, 4.466773991, 5.599788987, 6.693661531, 7.80175334, 8.91857717, 9.525282508, 10.207424825, 10.974604443, 11.810962634, 12.737642355, 13.736264703, 14.826523623, 16, 16, 16, 16], degree=3))
            Line((-2.830594159, 9.807460559), (-7.185724869, 9.807460559))
        make_face(mode=Mode.SUBTRACT)
    # profile 2 of 2: a face of its own
    with BuildSketch(Plane.XY.offset(2.5)):
        with Locations((11.284227055, 0.343518252)):
            Rectangle(ESQUISSE2_W, ESQUISSE2_H)
    extrude(amount=-ENL_V_MAT_EXTRU_1_DEPTH, mode=Mode.SUBTRACT)


solid = part.part
